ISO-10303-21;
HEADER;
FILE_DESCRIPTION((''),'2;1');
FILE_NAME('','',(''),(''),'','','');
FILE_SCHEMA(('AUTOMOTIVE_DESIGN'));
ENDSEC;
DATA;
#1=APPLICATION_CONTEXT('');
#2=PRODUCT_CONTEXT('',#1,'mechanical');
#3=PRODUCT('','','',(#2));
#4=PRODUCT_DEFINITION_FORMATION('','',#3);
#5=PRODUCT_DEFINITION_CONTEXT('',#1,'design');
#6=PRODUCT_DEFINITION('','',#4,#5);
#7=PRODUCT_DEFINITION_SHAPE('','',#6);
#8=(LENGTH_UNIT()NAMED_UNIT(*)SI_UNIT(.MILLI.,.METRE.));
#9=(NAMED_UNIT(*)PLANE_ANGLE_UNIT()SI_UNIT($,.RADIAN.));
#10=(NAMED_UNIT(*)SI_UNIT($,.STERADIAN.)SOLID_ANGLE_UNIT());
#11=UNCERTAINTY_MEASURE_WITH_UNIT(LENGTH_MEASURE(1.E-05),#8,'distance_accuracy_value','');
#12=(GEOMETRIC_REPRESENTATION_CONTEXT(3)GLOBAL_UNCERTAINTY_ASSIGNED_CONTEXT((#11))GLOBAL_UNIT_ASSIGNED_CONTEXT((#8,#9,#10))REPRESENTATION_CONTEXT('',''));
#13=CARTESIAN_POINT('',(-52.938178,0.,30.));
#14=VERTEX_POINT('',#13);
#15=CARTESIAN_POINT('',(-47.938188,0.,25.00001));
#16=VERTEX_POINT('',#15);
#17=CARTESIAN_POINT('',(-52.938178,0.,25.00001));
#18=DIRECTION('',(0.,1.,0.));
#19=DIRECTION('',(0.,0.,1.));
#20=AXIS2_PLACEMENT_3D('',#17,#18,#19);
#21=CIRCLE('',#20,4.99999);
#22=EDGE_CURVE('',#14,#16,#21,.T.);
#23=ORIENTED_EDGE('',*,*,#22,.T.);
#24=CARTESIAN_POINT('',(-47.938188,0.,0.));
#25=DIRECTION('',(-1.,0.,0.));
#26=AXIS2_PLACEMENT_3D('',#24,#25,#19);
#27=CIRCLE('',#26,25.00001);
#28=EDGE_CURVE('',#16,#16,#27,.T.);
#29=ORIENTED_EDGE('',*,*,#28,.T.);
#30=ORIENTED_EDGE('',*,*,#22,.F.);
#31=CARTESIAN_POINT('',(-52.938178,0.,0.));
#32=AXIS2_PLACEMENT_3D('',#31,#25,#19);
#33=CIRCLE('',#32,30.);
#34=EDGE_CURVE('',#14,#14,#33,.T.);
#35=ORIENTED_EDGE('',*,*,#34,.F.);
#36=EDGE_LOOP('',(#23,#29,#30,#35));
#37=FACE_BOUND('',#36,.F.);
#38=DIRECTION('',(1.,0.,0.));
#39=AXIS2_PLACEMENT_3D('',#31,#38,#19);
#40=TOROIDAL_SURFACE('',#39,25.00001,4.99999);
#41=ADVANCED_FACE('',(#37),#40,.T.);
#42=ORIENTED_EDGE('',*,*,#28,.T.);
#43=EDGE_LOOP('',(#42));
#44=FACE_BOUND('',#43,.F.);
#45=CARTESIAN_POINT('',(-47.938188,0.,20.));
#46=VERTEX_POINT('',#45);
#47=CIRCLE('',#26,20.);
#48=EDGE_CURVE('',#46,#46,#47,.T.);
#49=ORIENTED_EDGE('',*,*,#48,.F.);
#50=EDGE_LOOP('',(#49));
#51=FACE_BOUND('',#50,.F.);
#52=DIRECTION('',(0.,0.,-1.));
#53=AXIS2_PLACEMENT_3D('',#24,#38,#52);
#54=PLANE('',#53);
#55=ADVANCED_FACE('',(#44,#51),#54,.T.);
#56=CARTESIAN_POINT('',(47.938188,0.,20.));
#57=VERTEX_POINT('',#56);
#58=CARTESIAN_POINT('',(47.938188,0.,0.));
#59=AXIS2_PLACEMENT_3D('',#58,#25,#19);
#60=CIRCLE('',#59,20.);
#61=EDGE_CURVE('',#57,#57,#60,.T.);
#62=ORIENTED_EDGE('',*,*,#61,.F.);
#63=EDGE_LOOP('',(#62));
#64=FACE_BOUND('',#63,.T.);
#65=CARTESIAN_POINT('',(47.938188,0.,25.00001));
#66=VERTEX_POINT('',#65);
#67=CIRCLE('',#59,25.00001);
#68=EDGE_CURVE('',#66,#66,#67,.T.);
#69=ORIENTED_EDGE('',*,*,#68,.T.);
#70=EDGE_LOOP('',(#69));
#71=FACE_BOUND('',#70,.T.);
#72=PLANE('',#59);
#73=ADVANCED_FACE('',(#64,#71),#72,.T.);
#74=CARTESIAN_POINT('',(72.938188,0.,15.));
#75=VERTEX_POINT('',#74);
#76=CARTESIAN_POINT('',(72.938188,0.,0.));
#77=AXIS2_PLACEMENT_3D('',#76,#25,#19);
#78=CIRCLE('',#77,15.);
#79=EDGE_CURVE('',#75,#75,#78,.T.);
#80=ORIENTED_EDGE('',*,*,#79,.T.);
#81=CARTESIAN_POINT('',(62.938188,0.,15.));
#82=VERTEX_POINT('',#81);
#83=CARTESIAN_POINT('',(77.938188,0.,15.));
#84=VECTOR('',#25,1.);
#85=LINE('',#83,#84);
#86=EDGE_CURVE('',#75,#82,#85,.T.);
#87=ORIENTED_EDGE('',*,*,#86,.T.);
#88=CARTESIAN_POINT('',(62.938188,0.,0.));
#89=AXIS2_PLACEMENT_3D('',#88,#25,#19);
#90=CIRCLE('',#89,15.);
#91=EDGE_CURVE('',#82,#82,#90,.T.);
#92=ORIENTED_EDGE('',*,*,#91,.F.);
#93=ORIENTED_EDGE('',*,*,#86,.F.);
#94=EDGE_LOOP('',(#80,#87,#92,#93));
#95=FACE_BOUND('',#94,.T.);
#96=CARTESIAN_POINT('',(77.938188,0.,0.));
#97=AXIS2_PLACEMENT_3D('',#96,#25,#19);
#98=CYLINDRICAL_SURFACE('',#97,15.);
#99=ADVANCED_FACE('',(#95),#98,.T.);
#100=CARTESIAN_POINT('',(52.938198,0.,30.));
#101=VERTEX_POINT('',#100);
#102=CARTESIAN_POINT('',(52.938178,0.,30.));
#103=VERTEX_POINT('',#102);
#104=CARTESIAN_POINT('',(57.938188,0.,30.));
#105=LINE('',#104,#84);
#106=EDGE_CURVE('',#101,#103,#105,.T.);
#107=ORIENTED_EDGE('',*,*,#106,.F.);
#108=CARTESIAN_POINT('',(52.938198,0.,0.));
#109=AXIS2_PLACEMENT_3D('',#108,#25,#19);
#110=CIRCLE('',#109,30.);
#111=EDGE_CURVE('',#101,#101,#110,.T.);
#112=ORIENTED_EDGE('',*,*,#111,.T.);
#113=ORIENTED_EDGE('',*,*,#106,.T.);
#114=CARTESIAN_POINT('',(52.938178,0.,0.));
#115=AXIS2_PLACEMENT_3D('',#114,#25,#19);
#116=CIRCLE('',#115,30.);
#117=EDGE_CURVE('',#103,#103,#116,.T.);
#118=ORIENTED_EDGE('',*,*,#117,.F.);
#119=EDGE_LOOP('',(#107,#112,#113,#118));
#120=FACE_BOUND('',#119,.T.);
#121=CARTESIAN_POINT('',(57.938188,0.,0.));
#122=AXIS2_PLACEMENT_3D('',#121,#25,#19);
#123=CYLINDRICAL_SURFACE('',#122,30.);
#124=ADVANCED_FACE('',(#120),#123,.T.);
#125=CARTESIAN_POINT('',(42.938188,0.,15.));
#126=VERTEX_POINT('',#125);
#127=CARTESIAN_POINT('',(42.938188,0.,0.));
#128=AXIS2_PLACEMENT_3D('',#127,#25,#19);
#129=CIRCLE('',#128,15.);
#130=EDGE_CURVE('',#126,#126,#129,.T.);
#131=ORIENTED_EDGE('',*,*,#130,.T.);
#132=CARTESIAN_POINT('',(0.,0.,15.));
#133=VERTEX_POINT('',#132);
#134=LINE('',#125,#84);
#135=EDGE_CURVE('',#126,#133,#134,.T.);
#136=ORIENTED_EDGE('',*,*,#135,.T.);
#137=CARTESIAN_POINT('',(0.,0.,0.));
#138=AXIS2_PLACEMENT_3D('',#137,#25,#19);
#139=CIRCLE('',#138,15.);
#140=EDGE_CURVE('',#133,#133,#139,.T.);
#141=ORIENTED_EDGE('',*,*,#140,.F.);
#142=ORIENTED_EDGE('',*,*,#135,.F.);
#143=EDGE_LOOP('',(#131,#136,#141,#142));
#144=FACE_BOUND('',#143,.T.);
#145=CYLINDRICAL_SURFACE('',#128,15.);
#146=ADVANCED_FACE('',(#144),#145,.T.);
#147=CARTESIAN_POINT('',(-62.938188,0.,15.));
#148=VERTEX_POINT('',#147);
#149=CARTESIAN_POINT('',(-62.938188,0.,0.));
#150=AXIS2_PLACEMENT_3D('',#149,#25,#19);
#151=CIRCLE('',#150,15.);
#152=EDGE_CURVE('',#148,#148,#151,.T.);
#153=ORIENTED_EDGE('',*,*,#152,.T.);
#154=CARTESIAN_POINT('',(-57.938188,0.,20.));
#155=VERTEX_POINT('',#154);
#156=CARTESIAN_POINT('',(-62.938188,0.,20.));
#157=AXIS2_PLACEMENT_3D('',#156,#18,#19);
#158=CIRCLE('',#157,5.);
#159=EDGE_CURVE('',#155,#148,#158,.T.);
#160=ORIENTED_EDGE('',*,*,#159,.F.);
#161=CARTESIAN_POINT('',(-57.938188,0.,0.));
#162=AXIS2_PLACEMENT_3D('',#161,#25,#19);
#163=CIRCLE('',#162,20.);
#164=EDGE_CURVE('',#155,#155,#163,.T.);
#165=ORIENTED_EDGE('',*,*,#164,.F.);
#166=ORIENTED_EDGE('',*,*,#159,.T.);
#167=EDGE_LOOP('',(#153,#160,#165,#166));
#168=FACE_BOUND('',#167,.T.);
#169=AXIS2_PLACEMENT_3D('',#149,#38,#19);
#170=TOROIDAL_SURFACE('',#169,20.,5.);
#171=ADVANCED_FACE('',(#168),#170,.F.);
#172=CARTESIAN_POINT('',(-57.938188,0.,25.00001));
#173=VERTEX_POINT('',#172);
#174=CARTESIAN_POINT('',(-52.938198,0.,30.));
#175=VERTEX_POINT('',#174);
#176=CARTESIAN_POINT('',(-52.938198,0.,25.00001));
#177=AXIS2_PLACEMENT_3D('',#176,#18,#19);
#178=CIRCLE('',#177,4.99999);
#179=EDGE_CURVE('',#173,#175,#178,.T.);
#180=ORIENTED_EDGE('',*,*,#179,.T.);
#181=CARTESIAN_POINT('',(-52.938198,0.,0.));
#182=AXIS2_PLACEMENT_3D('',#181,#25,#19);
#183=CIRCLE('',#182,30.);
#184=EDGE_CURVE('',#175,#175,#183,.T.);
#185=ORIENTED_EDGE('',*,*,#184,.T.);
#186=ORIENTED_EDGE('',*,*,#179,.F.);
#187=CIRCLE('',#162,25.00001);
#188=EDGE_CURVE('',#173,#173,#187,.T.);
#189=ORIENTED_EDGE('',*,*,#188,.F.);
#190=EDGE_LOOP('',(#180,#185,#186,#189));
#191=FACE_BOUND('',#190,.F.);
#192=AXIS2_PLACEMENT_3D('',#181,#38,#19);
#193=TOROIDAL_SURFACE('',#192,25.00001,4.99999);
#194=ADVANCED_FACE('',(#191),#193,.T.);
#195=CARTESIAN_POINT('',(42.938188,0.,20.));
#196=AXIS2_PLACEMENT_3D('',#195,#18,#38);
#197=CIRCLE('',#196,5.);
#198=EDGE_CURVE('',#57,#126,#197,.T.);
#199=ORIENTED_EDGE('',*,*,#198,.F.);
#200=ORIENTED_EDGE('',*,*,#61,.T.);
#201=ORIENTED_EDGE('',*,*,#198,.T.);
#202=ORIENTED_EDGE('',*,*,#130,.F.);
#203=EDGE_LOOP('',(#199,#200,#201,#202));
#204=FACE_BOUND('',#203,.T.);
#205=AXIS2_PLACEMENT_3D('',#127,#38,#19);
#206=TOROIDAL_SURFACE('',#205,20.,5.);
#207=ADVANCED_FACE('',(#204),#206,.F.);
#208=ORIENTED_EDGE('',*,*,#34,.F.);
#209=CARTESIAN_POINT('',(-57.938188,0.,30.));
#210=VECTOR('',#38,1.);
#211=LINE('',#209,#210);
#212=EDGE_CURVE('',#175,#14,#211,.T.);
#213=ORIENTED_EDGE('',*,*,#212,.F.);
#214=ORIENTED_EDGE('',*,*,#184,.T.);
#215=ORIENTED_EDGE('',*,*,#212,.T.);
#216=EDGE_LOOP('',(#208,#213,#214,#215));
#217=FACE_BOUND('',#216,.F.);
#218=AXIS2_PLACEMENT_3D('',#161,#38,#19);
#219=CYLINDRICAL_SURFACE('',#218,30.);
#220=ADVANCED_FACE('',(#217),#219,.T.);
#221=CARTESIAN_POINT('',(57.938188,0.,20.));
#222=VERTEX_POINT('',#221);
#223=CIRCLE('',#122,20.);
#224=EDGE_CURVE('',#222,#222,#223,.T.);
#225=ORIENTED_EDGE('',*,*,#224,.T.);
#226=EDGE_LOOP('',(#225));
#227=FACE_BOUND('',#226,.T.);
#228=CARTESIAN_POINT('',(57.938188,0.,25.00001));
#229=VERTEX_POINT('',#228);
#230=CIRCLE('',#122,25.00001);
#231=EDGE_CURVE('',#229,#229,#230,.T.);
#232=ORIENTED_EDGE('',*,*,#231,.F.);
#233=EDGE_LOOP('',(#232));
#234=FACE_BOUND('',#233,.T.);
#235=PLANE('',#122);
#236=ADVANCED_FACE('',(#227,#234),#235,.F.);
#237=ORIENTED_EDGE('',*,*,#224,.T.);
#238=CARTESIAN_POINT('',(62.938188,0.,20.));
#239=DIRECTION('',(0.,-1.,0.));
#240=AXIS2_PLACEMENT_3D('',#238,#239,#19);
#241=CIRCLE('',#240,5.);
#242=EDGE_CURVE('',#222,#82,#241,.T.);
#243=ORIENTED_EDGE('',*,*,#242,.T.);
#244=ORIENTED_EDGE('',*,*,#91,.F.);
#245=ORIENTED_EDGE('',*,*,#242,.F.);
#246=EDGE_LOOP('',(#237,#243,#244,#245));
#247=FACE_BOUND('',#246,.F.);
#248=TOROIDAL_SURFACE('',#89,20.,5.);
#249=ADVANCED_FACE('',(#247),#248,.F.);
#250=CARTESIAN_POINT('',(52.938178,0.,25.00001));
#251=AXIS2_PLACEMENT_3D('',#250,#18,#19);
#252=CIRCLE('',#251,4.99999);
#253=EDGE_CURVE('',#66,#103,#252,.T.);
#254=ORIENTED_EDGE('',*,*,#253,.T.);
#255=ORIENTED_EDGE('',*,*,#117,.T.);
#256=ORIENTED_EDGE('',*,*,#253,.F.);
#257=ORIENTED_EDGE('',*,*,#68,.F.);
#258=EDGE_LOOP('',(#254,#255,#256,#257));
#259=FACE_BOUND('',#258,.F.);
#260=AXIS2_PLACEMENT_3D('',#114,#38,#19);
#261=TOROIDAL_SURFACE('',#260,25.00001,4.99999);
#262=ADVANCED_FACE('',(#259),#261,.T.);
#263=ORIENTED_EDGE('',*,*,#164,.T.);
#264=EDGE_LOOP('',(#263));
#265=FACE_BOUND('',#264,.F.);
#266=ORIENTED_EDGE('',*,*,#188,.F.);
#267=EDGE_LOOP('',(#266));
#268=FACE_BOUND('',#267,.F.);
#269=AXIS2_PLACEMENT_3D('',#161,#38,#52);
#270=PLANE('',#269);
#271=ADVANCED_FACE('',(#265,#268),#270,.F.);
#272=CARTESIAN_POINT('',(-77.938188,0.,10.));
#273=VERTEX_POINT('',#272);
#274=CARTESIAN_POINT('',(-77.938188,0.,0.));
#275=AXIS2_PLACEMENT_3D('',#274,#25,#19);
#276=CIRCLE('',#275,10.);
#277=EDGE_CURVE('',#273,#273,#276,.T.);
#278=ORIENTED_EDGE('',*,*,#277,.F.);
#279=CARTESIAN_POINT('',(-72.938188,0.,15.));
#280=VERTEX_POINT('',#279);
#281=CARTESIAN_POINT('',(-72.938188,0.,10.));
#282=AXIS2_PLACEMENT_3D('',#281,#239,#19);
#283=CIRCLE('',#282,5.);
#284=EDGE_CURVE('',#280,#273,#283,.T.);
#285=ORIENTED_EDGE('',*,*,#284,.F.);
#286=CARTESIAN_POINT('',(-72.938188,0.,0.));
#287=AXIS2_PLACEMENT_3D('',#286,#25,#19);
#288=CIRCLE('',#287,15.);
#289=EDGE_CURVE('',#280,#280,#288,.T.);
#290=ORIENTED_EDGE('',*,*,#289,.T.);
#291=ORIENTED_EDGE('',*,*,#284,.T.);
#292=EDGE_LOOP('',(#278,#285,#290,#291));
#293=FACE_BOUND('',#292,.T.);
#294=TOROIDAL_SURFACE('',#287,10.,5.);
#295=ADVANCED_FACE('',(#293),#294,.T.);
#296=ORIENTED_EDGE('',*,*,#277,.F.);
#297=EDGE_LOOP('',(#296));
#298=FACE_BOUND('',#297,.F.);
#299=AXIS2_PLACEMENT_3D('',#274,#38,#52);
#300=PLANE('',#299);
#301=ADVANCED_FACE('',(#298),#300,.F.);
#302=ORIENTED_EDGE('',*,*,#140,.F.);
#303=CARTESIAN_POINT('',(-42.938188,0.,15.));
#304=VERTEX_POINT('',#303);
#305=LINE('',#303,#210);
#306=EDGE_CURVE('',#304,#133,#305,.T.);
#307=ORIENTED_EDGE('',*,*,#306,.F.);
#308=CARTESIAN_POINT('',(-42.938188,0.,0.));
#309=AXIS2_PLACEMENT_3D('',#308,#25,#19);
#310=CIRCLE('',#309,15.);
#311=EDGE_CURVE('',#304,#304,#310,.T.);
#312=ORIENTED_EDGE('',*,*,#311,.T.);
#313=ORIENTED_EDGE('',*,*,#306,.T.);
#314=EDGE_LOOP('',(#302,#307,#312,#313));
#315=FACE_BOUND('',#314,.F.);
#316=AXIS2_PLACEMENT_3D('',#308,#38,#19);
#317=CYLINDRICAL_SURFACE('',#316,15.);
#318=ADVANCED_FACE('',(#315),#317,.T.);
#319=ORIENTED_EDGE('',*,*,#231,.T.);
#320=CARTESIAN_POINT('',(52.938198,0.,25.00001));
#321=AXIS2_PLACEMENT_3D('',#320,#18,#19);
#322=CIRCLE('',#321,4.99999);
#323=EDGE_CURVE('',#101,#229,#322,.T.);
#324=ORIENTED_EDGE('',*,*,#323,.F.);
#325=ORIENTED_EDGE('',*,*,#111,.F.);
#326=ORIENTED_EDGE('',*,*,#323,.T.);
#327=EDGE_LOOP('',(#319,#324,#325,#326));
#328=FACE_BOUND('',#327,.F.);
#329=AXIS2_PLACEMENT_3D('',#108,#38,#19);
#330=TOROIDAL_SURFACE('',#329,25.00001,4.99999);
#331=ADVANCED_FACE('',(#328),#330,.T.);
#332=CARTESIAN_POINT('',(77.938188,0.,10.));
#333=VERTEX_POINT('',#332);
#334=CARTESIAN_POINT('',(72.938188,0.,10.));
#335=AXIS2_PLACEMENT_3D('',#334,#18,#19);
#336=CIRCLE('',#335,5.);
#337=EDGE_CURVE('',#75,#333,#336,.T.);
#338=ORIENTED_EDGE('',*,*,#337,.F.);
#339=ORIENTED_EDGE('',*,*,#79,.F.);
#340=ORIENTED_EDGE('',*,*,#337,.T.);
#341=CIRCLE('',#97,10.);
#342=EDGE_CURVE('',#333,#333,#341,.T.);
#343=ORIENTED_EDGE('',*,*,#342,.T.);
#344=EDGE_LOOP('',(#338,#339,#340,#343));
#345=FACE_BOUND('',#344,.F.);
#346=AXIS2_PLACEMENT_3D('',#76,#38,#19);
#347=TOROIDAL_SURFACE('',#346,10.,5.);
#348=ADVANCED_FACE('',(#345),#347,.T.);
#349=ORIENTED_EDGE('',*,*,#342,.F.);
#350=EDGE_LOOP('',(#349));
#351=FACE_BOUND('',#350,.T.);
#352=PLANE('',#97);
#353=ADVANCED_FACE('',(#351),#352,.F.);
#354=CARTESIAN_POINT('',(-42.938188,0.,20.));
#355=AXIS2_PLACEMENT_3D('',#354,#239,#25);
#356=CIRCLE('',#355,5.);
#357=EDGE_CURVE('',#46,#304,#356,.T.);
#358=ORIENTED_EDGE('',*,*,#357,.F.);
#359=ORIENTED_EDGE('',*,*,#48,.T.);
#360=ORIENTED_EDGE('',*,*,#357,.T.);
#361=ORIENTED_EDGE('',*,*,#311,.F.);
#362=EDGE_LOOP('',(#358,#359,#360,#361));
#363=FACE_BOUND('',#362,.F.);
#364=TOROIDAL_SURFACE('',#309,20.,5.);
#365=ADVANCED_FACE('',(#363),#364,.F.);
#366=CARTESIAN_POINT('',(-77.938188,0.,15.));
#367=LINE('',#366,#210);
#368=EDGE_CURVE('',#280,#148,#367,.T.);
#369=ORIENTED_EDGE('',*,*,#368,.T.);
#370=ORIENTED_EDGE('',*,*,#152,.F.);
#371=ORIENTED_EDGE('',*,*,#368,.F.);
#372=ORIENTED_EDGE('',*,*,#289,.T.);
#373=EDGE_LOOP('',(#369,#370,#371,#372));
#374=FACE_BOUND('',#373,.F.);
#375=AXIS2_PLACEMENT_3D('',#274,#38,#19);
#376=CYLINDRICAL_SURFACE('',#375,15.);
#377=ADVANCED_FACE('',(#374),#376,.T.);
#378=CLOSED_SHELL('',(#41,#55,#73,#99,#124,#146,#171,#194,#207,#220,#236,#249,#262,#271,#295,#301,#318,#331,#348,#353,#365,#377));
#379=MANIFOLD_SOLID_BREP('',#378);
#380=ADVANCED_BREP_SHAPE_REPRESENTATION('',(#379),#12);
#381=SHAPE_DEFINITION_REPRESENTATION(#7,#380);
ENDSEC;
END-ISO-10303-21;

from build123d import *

# Parameters (mm, degrees)
F3_R = 4.99999
F4_R = 5


# Not quite as in the source:
# - a fillet or chamfer is up to 0.001 mm smaller than in the source, because OpenCascade refuses the exact size


with BuildPart() as f1:
    # F0 (on Front) → F1 (revolve)
    with BuildSketch(Plane.XZ):
        with BuildLine():
            Line((0, 15), (0, 0))
            Line((0, 0), (77.9381879678, 0))
            Line((77.9381879678, 0), (77.9381879678, 15))
            Line((77.9381879678, 15), (57.9381879678, 15))
            Line((57.9381879678, 15), (57.9381879678, 30))
            Line((57.9381879678, 30), (47.9381879678, 30))
            Line((47.9381879678, 30), (47.9381879678, 20))
            ThreePointArc((47.9381879678, 20), (46.4737218738, 16.4644660941), (42.9381879678, 15))
            Line((42.9381879678, 15), (0, 15))
        make_face()
    revolve(axis=Axis((38.9690939839, 0, 0), (-1, 0, 0)))

    # F2: F1 across plane


with BuildPart() as f1_1:
    add(f1.part)
    add(f1.part.mirror(Plane.YZ))

    # F3 (radius 5 in the source; OpenCascade refuses exactly that, so slightly less here)
    f3_edges = [f1_1.edges().sort_by_distance(p)[0] for p in [
        (-57.938188, 0, -30),
        (-47.938188, 0, -30),
        (-52.938188, 0, 30),
        (57.938188, 0, -30),
        (47.938188, 0, -30),
        (52.938188, 0, 30),
    ]]
    fillet(f3_edges, radius=F3_R)

    # F4
    f4_edges = [f1_1.edges().sort_by_distance(p)[0] for p in [
        (77.938188, 0, -15),
        (57.938188, 0, -15),
        (67.938188, 0, 15),
        (-77.938188, 0, -15),
        (-57.938188, 0, -15),
        (-67.938188, 0, 15),
    ]]
    fillet(f4_edges, radius=F4_R)


solid = f1_1.part
